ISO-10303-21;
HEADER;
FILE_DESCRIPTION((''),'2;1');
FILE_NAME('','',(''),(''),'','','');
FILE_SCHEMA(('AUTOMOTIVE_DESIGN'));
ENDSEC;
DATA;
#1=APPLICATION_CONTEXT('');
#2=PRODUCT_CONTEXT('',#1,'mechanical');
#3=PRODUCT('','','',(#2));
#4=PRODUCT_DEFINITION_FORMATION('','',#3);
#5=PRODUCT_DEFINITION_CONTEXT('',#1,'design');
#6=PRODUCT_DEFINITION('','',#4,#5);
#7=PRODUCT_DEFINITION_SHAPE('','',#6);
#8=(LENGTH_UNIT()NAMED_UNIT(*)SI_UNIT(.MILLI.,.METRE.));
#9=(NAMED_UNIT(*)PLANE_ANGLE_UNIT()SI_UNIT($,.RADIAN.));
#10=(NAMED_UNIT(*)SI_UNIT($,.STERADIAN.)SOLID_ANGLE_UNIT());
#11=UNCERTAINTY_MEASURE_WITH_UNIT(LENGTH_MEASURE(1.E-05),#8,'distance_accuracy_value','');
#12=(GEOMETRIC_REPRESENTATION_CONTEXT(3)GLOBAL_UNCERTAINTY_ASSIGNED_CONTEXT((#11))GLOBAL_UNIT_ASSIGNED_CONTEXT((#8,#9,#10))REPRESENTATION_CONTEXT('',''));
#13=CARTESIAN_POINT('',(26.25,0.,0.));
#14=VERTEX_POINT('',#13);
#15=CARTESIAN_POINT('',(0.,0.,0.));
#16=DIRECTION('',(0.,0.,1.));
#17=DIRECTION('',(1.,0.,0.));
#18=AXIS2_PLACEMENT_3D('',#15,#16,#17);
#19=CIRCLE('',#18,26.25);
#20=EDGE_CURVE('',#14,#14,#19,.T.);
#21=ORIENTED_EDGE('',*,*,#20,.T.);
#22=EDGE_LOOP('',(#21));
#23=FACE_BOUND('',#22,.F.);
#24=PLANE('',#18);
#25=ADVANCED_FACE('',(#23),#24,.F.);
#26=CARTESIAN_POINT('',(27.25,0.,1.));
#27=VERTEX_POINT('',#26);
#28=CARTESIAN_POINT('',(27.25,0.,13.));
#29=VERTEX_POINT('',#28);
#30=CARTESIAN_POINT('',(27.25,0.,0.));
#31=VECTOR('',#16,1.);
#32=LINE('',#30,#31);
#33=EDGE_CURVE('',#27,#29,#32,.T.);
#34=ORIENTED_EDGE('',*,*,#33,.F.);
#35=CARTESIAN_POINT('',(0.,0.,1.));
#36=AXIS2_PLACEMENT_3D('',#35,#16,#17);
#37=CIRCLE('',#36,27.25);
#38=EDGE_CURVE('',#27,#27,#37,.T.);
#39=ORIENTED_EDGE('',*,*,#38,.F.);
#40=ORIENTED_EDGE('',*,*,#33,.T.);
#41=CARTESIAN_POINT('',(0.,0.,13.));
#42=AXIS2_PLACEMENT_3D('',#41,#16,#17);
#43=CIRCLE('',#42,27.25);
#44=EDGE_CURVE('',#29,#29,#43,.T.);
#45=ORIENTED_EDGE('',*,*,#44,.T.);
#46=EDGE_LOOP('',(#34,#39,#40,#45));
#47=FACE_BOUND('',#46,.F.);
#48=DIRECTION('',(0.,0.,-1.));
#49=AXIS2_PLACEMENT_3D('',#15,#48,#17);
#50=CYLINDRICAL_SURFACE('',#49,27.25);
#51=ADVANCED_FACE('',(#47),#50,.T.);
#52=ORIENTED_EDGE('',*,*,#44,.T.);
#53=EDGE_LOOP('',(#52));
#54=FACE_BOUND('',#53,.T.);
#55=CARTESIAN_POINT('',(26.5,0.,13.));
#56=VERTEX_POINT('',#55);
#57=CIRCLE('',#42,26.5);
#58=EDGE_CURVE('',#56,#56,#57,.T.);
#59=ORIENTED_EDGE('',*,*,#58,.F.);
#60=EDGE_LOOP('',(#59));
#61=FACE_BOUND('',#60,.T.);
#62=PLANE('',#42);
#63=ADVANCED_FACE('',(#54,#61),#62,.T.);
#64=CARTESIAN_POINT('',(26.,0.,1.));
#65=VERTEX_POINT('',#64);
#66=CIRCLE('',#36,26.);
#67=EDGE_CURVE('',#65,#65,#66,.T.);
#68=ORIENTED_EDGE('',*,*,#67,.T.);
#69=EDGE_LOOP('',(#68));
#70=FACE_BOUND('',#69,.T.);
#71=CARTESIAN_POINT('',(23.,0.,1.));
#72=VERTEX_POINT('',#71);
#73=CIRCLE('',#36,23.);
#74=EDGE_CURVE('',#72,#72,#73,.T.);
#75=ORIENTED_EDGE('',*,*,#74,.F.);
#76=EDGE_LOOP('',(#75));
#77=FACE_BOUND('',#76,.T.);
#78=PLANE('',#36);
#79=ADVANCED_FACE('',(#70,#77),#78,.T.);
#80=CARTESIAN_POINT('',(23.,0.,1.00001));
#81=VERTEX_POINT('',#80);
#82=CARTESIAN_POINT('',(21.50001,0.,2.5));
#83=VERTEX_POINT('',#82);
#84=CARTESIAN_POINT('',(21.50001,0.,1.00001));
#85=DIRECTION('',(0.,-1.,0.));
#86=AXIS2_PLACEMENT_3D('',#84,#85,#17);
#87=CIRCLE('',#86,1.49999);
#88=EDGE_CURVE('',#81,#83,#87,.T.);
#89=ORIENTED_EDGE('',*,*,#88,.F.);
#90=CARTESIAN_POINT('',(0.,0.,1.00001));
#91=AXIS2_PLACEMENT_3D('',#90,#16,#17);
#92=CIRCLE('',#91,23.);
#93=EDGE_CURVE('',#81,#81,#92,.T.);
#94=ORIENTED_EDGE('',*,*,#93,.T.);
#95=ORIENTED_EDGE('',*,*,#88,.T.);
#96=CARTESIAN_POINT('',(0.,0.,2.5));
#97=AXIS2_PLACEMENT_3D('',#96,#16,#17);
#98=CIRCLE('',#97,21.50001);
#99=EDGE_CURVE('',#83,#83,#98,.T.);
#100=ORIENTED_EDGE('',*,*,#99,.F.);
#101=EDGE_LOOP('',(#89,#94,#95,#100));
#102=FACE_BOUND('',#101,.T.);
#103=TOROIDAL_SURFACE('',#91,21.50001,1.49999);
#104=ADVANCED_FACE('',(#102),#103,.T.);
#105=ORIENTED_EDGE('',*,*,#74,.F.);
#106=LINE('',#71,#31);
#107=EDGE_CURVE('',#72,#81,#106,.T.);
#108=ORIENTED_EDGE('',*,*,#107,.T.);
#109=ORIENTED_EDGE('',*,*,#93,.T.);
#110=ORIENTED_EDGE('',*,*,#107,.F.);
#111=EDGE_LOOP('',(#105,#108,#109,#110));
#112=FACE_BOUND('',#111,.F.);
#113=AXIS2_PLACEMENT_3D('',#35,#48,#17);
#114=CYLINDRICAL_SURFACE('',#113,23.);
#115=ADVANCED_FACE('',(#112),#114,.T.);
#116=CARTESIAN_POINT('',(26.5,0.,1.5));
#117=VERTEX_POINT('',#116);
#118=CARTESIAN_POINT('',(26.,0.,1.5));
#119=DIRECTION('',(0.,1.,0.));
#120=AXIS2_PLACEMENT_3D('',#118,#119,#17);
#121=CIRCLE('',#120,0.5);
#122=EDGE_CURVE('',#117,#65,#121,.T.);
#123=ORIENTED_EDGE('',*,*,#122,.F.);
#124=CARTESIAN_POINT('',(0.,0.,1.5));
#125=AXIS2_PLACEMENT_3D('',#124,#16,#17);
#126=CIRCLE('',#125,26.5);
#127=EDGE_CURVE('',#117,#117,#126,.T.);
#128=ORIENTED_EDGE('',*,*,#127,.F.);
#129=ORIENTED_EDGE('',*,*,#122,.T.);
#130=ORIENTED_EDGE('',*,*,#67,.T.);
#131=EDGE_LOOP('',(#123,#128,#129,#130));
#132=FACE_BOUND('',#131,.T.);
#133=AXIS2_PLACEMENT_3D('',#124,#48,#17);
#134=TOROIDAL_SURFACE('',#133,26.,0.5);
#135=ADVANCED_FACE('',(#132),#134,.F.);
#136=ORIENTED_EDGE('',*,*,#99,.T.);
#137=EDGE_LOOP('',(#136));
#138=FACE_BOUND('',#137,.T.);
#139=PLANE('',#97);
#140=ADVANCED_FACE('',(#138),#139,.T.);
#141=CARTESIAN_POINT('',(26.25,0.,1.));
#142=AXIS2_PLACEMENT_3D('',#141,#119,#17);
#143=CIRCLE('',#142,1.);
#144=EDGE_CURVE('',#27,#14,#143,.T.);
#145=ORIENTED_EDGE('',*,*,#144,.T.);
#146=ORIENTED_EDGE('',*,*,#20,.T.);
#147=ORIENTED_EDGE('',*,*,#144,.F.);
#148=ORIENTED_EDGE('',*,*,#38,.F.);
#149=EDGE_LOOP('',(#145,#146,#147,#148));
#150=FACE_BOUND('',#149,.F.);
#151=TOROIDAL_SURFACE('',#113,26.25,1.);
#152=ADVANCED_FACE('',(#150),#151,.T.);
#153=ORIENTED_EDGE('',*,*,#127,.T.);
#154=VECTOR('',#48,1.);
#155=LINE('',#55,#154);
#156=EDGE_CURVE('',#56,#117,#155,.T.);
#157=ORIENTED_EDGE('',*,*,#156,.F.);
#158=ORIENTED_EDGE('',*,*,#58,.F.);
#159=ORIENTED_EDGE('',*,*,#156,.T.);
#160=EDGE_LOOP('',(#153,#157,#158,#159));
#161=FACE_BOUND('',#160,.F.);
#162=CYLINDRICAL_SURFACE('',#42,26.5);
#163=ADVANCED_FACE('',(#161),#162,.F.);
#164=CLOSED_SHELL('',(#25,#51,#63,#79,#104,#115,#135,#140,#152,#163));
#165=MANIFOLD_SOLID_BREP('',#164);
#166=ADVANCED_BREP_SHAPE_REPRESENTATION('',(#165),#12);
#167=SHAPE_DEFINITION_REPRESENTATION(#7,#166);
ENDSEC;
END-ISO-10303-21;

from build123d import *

# Parameters (mm, degrees)
F0_R     = 27.25
F1_DEPTH = 13
F2_R     = 26.5
F3_DEPTH = 12
F4_R     = 23
F5_DEPTH = 1.5
F6_R     = 1.49999
F7_R     = 1
F8_R     = 0.5


# Not quite as in the source:
# - a fillet or chamfer is up to 0.001 mm smaller than in the source, because OpenCascade refuses the exact size


with BuildPart() as f1:
    # F0 (on Top) → F1 (new body)
    with BuildSketch(Plane.XY):
        Circle(F0_R)
    extrude(amount=F1_DEPTH)

    # F2 (on face) → F3 (cut)
    with BuildSketch(Plane.XY.offset(13)):
        Circle(F2_R)
    extrude(amount=-F3_DEPTH, mode=Mode.SUBTRACT)

    # F4 (on face) → F5 (join)
    with BuildSketch(Plane.XY.offset(1)):
        Circle(F4_R)
    extrude(amount=F5_DEPTH)

    # F6 (radius 1.5 in the source; OpenCascade refuses exactly that, so slightly less here)
    f6_edges = [f1.edges().sort_by_distance(p)[0] for p in [
        (-23, 0, 2.5),
    ]]
    fillet(f6_edges, radius=F6_R)

    # F7
    f7_edges = [f1.edges().sort_by_distance(p)[0] for p in [
        (-27.25, 0, 0),
    ]]
    fillet(f7_edges, radius=F7_R)

    # F8
    f8_edges = [f1.edges().sort_by_distance(p)[0] for p in [
        (-26.5, 0, 1),
    ]]
    fillet(f8_edges, radius=F8_R)


solid = f1.part
